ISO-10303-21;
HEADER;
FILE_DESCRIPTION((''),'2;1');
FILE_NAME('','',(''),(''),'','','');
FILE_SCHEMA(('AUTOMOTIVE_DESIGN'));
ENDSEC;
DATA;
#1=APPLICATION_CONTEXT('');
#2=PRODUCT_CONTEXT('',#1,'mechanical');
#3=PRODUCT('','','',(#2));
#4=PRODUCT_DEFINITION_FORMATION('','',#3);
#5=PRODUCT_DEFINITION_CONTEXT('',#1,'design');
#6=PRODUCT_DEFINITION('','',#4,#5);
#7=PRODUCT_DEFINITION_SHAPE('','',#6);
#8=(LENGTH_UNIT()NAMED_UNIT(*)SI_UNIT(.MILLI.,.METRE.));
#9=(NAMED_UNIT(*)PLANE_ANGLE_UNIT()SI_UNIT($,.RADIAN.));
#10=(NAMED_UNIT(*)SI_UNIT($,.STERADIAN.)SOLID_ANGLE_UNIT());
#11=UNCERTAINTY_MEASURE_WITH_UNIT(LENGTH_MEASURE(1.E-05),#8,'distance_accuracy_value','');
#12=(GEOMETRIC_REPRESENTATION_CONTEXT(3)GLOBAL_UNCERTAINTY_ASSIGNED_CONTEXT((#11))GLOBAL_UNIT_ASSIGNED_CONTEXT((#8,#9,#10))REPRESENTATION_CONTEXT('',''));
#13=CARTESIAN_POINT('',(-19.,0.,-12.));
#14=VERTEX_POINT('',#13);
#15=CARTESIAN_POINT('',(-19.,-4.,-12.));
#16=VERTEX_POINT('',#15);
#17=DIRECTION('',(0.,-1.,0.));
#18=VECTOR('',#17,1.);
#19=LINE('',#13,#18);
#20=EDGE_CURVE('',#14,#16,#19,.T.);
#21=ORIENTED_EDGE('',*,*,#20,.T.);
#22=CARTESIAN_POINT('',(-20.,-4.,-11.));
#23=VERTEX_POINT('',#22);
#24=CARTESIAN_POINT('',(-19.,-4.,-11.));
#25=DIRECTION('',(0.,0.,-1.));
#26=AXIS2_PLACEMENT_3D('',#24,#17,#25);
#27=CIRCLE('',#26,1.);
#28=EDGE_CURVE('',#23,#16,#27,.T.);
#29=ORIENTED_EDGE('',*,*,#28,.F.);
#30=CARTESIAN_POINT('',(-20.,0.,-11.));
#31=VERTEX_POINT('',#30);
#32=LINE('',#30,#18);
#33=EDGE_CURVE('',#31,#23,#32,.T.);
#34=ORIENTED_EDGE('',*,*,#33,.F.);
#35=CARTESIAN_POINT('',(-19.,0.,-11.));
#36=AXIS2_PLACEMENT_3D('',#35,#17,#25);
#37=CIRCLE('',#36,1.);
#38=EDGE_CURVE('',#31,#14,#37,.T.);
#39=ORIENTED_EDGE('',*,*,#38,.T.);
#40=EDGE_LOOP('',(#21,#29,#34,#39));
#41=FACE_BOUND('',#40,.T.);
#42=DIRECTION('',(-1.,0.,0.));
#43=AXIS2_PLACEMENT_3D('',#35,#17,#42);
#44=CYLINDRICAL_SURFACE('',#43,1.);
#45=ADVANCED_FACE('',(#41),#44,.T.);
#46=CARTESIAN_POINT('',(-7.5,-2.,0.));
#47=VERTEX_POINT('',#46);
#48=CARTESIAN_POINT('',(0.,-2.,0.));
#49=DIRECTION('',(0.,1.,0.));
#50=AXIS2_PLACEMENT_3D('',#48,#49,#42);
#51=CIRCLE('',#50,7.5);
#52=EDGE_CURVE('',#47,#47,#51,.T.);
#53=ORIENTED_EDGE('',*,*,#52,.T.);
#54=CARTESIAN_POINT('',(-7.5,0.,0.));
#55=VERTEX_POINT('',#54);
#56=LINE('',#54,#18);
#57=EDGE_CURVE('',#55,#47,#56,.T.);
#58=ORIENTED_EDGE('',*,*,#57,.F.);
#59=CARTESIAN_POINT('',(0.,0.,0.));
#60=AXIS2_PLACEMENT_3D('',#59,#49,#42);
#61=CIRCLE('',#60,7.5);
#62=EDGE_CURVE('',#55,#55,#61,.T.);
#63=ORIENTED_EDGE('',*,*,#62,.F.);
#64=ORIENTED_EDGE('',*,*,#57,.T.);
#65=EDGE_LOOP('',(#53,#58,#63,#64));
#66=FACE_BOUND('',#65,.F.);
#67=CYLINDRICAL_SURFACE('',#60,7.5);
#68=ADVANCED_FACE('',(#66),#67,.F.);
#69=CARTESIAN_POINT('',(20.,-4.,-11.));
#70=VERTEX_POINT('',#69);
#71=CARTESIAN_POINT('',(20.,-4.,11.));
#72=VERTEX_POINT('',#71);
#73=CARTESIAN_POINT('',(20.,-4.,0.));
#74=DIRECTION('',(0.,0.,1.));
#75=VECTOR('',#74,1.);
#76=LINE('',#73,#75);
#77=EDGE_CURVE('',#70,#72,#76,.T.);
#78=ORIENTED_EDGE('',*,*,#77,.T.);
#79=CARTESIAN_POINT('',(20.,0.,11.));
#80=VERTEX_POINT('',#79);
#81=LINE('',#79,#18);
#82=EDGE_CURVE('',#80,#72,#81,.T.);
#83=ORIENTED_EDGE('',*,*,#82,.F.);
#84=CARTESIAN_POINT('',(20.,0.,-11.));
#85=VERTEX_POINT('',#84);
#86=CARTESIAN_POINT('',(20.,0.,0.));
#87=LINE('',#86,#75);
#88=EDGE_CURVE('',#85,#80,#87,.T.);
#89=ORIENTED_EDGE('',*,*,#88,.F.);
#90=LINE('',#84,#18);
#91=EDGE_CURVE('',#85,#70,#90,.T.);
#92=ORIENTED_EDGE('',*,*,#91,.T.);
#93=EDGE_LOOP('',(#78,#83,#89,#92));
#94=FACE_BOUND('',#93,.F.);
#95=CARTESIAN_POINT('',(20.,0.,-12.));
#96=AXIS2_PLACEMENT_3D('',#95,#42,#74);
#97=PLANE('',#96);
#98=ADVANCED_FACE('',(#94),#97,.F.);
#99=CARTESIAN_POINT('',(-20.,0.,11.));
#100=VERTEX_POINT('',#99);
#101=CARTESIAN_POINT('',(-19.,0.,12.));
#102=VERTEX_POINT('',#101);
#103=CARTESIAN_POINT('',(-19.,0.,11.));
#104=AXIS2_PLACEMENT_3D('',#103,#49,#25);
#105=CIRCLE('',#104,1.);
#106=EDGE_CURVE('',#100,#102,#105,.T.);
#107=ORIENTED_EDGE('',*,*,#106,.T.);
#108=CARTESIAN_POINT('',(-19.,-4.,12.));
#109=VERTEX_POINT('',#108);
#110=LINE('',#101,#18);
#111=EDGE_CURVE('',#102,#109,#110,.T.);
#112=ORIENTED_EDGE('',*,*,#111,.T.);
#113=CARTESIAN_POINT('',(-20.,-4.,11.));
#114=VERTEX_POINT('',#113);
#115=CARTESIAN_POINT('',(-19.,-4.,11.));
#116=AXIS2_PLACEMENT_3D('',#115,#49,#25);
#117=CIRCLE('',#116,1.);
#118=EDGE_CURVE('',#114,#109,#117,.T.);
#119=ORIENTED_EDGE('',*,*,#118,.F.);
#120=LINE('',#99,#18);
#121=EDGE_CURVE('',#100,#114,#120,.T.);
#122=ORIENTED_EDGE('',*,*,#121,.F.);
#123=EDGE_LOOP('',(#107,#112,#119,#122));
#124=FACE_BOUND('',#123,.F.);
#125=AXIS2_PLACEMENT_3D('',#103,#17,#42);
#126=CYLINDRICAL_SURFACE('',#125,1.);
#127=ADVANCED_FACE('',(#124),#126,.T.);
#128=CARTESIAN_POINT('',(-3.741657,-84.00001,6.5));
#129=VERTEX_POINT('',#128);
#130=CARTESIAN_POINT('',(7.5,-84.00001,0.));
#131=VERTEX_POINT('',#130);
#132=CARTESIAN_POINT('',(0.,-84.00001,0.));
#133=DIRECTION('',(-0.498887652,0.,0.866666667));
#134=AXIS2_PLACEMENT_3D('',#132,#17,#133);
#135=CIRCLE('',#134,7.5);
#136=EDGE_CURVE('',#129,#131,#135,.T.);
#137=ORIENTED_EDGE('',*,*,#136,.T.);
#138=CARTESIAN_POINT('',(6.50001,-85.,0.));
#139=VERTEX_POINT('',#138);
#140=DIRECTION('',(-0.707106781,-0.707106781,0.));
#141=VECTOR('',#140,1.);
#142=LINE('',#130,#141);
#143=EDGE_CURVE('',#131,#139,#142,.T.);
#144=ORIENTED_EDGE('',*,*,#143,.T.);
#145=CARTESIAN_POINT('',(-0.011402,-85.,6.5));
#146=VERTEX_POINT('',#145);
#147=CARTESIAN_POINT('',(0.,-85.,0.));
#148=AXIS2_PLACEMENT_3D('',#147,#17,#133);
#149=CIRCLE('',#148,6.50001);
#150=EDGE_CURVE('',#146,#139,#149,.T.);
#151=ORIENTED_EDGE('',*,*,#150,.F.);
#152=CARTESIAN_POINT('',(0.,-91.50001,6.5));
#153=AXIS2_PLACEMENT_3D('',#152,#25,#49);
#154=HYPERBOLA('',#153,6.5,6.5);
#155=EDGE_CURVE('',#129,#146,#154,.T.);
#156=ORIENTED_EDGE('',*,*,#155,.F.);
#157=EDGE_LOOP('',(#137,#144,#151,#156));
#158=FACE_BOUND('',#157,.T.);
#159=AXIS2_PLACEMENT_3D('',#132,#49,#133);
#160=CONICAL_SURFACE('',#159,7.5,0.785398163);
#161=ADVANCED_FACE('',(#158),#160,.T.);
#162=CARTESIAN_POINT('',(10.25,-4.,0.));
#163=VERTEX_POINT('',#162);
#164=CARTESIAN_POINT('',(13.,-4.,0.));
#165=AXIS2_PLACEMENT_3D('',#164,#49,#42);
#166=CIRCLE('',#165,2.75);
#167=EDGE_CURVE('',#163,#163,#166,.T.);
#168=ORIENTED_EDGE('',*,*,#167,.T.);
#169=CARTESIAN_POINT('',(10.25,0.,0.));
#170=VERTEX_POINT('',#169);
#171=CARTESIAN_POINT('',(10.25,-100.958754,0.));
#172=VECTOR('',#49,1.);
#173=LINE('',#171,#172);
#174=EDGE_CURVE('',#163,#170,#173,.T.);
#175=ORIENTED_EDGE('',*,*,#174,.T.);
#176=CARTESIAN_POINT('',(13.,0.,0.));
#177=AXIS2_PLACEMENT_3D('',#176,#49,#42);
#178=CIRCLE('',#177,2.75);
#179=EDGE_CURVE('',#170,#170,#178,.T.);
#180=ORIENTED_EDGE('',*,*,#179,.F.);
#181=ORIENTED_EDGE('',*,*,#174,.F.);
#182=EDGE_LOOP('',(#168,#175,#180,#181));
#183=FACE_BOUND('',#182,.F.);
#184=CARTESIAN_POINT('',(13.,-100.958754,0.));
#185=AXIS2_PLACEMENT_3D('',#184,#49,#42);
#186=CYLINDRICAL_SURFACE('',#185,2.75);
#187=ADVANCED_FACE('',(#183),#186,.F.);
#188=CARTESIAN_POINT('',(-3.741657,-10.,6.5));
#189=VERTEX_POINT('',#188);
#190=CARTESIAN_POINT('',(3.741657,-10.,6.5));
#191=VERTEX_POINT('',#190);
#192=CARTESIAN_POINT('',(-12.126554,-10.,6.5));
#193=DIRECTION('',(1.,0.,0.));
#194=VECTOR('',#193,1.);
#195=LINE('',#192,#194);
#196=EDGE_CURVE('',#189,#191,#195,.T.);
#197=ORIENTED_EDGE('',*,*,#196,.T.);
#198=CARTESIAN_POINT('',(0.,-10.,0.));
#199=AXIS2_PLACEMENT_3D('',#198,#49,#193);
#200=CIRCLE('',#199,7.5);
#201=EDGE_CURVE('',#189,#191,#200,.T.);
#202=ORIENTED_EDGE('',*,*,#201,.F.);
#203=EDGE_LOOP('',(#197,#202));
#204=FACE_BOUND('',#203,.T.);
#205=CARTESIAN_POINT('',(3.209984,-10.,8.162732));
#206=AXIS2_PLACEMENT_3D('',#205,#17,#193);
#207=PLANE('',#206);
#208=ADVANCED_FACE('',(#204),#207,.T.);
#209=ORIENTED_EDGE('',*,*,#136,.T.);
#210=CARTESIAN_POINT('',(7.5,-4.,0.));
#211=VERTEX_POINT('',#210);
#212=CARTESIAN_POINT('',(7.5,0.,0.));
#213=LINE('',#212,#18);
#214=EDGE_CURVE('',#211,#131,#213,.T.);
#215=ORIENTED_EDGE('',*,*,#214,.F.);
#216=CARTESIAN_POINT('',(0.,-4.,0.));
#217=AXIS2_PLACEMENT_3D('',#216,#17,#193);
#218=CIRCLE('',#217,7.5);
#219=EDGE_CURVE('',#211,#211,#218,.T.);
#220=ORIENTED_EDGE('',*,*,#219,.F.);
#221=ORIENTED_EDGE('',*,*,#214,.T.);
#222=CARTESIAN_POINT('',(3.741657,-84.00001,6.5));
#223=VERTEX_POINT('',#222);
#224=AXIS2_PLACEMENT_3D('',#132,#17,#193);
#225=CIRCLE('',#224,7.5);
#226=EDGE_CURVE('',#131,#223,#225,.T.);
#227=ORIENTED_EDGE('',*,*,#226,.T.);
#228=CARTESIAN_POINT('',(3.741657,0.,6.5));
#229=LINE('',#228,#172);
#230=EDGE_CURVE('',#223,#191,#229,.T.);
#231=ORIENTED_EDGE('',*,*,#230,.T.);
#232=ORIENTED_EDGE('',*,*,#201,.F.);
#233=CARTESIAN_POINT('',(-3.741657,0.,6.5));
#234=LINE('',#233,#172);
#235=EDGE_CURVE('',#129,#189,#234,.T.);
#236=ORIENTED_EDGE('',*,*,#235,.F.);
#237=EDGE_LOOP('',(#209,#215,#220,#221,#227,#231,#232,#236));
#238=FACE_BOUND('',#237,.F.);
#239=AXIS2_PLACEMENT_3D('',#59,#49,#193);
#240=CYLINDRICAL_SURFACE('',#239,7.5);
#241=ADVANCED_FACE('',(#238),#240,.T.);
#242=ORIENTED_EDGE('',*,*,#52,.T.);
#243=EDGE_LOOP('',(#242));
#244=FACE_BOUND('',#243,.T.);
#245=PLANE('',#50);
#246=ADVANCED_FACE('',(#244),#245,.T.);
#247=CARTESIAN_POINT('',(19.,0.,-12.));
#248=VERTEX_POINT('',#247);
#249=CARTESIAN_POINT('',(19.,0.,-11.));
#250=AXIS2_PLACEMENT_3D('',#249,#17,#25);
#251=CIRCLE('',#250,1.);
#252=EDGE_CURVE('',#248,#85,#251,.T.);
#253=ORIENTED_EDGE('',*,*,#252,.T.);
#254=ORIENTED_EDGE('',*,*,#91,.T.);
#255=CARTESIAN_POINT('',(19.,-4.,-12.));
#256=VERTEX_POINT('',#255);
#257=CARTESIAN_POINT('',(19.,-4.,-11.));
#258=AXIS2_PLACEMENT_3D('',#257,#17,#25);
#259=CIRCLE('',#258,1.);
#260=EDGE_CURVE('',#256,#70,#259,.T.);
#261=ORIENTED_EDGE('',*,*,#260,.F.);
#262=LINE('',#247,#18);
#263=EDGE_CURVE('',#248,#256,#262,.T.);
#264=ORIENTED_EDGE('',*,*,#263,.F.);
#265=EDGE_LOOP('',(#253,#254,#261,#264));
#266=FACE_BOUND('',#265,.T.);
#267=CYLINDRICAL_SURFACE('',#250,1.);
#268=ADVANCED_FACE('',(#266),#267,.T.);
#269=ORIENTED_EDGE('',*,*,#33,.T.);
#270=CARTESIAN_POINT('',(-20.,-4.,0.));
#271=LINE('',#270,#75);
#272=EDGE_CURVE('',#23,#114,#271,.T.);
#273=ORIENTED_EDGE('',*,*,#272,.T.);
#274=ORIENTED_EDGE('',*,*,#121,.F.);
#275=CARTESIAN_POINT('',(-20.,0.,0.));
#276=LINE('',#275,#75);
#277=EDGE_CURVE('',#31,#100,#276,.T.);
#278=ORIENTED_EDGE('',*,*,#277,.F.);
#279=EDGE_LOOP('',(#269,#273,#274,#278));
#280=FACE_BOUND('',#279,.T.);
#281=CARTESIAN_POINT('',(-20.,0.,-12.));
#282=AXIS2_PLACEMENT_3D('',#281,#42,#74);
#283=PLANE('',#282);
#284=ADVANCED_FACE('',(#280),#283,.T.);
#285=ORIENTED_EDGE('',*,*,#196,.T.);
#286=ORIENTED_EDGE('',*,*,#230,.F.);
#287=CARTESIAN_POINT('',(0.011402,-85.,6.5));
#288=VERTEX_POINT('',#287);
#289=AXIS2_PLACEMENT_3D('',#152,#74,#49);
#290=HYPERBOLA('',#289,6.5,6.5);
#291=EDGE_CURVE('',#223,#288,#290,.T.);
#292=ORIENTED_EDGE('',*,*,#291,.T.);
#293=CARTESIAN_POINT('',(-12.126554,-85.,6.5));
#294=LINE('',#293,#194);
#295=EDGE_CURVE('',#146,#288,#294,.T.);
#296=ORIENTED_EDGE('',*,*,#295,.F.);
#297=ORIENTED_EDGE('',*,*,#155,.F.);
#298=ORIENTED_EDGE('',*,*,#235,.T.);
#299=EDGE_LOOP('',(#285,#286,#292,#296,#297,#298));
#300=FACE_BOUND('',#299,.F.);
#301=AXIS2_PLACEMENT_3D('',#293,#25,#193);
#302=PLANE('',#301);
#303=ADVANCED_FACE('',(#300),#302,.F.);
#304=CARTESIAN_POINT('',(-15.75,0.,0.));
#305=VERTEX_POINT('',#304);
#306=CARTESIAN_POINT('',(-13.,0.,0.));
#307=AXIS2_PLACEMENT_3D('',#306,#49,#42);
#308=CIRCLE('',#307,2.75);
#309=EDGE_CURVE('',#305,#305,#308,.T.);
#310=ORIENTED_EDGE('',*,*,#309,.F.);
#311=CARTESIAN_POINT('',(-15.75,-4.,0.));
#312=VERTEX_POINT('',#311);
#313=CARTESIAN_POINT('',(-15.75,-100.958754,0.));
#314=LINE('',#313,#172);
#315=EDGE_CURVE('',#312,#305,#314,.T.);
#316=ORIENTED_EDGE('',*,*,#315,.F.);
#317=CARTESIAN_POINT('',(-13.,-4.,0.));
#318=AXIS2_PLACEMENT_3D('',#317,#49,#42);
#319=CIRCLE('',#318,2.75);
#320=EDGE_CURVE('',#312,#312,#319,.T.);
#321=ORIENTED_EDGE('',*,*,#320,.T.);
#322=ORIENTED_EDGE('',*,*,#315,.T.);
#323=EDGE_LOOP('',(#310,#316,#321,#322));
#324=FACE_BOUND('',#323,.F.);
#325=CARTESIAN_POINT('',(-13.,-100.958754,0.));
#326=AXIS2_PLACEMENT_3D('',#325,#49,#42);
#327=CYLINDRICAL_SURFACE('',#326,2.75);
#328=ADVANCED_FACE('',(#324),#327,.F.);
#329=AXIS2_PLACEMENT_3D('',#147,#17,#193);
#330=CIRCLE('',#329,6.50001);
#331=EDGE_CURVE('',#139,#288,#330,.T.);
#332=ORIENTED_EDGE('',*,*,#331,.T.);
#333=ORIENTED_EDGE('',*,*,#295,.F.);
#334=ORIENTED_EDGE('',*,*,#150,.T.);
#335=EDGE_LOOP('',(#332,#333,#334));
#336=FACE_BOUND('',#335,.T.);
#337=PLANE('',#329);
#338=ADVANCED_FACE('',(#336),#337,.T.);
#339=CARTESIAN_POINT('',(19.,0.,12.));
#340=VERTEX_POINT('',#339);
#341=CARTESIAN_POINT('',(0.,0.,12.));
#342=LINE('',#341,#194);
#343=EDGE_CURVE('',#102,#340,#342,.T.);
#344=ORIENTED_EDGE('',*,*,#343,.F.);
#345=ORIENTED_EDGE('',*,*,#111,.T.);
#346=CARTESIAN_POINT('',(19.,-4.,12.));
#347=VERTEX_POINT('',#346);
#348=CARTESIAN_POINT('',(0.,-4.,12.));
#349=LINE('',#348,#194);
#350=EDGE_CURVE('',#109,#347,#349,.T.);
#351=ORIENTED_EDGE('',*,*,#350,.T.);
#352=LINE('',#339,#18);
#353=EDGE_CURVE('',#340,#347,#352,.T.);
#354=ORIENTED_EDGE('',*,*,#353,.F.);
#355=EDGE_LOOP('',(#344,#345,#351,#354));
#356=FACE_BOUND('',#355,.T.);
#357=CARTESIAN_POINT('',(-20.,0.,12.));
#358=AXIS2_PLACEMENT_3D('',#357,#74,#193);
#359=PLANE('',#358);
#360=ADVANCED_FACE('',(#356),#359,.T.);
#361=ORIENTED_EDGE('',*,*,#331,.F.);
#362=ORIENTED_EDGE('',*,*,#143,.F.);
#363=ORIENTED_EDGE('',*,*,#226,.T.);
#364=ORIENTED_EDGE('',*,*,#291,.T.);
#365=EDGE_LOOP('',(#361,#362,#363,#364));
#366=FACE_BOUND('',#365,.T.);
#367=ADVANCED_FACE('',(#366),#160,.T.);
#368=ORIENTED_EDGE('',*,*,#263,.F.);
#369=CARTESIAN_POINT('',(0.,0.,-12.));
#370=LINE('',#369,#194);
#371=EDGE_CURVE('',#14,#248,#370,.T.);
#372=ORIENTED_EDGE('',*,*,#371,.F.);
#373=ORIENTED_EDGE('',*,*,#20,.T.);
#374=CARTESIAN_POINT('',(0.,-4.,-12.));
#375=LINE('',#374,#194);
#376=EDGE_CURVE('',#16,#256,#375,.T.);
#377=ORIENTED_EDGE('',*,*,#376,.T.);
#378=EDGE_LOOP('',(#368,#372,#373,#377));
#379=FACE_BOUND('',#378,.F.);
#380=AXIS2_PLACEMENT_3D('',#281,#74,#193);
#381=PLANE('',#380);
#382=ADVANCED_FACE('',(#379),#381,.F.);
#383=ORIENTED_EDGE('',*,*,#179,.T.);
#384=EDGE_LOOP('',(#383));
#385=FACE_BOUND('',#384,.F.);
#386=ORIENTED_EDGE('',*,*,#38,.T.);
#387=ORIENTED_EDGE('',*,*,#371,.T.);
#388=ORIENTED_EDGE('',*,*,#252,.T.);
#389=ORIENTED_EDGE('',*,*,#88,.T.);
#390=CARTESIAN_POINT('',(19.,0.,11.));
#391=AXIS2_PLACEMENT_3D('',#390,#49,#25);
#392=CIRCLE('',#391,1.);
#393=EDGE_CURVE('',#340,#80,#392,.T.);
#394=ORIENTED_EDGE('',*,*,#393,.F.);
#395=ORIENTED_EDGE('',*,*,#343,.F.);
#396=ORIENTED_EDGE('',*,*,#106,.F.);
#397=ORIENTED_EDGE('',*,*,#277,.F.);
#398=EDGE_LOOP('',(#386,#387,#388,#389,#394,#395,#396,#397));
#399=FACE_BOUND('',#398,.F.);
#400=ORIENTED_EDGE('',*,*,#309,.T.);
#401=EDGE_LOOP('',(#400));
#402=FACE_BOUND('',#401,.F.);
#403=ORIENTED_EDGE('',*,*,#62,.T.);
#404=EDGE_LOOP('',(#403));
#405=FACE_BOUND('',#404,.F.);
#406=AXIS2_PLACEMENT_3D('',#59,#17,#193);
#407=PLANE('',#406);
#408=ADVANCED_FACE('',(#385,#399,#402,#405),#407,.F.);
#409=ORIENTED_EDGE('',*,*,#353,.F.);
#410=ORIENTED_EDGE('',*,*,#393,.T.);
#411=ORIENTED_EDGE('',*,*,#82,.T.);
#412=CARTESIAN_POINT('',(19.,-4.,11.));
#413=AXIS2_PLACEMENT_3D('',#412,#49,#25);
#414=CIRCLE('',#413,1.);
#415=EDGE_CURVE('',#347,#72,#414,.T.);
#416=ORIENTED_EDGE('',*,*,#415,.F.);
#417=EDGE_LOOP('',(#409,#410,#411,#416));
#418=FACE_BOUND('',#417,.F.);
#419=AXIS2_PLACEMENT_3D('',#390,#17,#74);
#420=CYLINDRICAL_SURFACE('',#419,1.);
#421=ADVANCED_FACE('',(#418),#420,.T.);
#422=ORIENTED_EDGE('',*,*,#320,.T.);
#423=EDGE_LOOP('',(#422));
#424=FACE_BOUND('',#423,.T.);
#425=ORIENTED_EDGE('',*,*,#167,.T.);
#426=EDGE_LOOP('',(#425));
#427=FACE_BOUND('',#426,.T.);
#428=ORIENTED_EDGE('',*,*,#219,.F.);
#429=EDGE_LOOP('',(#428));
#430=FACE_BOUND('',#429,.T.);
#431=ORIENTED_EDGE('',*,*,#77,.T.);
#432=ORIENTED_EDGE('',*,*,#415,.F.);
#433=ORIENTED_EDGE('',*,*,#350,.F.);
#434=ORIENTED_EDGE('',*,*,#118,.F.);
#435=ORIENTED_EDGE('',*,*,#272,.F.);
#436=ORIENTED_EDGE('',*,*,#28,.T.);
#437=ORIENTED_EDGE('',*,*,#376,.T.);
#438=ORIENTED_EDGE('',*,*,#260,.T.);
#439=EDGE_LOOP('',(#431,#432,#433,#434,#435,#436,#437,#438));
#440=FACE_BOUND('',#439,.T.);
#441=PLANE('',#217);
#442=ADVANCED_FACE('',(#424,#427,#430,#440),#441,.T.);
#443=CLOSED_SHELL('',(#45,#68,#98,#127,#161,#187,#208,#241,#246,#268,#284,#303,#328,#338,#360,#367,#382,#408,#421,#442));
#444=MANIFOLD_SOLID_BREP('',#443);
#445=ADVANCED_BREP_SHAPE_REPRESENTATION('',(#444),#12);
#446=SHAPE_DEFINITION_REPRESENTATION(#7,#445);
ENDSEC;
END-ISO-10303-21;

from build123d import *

# Parameters (mm, degrees)
F0_W      = 40
F0_H      = 24
F0_R      = 7.5
F1_DEPTH  = 4
F2_DEPTH  = 85
F4_D      = 5.5
F6_DEPTH  = 75
F7_R      = 1
F8_SIZE2  = 0.99999
F8_SIZE   = 0.99999
F9_R      = 7.5
F10_DEPTH = 2


# Not quite as in the source:
# - a fillet or chamfer is up to 0.001 mm smaller than in the source, because OpenCascade refuses the exact size


with BuildPart() as f1:
    # F0 (on Front) → F1 (new body)
    with BuildSketch(Plane.XZ):
        Rectangle(F0_W, F0_H)
        Circle(F0_R, mode=Mode.SUBTRACT)
    extrude(amount=F1_DEPTH)

    # F0 (on Front) → F2 (join)
    with BuildSketch(Plane.XZ):
        Circle(F0_R)
    extrude(amount=F2_DEPTH)

    # F4 (through all)
    with Locations(Plane.XZ.offset(4)):
        with Locations((-13, 0), (13, 0)):
            Hole(F4_D / 2)

    # F5 (on face) → F6 (cut)
    with BuildSketch(Plane.XZ.offset(85)):
        with BuildLine():
            Line((8.4905531257, 12.6322833821), (-12.126554407, 6.5))
            Line((-12.126554407, 6.5), (-3.7416573868, 6.5))
            ThreePointArc((-3.7416573868, 6.5), (0, 7.5), (3.7416573868, 6.5))
            Line((3.7416573868, 6.5), (18.1320688201, 6.5))
            Line((18.1320688201, 6.5), (8.4905531257, 12.6322833821))
        make_face()
        with BuildLine():
            ThreePointArc((3.7416573868, 6.5), (0, 7.5), (-3.7416573868, 6.5))
            Line((-3.7416573868, 6.5), (3.7416573868, 6.5))
        make_face()
    extrude(amount=-F6_DEPTH, mode=Mode.SUBTRACT)

    # F7
    f7_edges = [f1.edges().sort_by_distance(p)[0] for p in [
        (-20, -2, 12),
        (20, -2, 12),
        (20, -2, -12),
        (-20, -2, -12),
    ]]
    fillet(f7_edges, radius=F7_R)

    # F8 (size 1 and 1 in the source; OpenCascade refuses exactly that, so slightly less here)
    f8_edges = [f1.edges().sort_by_distance(p)[0] for p in [
        (-3.754169, -85, -6.492782),
        (6.492782, -85, 3.754169),
    ]]
    chamfer(f8_edges, length=F8_SIZE, length2=F8_SIZE2)

    # F9 (on face) → F10 (cut)
    with BuildSketch(Plane(origin=(0, 0, 0), x_dir=(-1, 0, 0), z_dir=(0, 1, 0))):
        Circle(F9_R)
    extrude(amount=-F10_DEPTH, mode=Mode.SUBTRACT)


solid = f1.part
